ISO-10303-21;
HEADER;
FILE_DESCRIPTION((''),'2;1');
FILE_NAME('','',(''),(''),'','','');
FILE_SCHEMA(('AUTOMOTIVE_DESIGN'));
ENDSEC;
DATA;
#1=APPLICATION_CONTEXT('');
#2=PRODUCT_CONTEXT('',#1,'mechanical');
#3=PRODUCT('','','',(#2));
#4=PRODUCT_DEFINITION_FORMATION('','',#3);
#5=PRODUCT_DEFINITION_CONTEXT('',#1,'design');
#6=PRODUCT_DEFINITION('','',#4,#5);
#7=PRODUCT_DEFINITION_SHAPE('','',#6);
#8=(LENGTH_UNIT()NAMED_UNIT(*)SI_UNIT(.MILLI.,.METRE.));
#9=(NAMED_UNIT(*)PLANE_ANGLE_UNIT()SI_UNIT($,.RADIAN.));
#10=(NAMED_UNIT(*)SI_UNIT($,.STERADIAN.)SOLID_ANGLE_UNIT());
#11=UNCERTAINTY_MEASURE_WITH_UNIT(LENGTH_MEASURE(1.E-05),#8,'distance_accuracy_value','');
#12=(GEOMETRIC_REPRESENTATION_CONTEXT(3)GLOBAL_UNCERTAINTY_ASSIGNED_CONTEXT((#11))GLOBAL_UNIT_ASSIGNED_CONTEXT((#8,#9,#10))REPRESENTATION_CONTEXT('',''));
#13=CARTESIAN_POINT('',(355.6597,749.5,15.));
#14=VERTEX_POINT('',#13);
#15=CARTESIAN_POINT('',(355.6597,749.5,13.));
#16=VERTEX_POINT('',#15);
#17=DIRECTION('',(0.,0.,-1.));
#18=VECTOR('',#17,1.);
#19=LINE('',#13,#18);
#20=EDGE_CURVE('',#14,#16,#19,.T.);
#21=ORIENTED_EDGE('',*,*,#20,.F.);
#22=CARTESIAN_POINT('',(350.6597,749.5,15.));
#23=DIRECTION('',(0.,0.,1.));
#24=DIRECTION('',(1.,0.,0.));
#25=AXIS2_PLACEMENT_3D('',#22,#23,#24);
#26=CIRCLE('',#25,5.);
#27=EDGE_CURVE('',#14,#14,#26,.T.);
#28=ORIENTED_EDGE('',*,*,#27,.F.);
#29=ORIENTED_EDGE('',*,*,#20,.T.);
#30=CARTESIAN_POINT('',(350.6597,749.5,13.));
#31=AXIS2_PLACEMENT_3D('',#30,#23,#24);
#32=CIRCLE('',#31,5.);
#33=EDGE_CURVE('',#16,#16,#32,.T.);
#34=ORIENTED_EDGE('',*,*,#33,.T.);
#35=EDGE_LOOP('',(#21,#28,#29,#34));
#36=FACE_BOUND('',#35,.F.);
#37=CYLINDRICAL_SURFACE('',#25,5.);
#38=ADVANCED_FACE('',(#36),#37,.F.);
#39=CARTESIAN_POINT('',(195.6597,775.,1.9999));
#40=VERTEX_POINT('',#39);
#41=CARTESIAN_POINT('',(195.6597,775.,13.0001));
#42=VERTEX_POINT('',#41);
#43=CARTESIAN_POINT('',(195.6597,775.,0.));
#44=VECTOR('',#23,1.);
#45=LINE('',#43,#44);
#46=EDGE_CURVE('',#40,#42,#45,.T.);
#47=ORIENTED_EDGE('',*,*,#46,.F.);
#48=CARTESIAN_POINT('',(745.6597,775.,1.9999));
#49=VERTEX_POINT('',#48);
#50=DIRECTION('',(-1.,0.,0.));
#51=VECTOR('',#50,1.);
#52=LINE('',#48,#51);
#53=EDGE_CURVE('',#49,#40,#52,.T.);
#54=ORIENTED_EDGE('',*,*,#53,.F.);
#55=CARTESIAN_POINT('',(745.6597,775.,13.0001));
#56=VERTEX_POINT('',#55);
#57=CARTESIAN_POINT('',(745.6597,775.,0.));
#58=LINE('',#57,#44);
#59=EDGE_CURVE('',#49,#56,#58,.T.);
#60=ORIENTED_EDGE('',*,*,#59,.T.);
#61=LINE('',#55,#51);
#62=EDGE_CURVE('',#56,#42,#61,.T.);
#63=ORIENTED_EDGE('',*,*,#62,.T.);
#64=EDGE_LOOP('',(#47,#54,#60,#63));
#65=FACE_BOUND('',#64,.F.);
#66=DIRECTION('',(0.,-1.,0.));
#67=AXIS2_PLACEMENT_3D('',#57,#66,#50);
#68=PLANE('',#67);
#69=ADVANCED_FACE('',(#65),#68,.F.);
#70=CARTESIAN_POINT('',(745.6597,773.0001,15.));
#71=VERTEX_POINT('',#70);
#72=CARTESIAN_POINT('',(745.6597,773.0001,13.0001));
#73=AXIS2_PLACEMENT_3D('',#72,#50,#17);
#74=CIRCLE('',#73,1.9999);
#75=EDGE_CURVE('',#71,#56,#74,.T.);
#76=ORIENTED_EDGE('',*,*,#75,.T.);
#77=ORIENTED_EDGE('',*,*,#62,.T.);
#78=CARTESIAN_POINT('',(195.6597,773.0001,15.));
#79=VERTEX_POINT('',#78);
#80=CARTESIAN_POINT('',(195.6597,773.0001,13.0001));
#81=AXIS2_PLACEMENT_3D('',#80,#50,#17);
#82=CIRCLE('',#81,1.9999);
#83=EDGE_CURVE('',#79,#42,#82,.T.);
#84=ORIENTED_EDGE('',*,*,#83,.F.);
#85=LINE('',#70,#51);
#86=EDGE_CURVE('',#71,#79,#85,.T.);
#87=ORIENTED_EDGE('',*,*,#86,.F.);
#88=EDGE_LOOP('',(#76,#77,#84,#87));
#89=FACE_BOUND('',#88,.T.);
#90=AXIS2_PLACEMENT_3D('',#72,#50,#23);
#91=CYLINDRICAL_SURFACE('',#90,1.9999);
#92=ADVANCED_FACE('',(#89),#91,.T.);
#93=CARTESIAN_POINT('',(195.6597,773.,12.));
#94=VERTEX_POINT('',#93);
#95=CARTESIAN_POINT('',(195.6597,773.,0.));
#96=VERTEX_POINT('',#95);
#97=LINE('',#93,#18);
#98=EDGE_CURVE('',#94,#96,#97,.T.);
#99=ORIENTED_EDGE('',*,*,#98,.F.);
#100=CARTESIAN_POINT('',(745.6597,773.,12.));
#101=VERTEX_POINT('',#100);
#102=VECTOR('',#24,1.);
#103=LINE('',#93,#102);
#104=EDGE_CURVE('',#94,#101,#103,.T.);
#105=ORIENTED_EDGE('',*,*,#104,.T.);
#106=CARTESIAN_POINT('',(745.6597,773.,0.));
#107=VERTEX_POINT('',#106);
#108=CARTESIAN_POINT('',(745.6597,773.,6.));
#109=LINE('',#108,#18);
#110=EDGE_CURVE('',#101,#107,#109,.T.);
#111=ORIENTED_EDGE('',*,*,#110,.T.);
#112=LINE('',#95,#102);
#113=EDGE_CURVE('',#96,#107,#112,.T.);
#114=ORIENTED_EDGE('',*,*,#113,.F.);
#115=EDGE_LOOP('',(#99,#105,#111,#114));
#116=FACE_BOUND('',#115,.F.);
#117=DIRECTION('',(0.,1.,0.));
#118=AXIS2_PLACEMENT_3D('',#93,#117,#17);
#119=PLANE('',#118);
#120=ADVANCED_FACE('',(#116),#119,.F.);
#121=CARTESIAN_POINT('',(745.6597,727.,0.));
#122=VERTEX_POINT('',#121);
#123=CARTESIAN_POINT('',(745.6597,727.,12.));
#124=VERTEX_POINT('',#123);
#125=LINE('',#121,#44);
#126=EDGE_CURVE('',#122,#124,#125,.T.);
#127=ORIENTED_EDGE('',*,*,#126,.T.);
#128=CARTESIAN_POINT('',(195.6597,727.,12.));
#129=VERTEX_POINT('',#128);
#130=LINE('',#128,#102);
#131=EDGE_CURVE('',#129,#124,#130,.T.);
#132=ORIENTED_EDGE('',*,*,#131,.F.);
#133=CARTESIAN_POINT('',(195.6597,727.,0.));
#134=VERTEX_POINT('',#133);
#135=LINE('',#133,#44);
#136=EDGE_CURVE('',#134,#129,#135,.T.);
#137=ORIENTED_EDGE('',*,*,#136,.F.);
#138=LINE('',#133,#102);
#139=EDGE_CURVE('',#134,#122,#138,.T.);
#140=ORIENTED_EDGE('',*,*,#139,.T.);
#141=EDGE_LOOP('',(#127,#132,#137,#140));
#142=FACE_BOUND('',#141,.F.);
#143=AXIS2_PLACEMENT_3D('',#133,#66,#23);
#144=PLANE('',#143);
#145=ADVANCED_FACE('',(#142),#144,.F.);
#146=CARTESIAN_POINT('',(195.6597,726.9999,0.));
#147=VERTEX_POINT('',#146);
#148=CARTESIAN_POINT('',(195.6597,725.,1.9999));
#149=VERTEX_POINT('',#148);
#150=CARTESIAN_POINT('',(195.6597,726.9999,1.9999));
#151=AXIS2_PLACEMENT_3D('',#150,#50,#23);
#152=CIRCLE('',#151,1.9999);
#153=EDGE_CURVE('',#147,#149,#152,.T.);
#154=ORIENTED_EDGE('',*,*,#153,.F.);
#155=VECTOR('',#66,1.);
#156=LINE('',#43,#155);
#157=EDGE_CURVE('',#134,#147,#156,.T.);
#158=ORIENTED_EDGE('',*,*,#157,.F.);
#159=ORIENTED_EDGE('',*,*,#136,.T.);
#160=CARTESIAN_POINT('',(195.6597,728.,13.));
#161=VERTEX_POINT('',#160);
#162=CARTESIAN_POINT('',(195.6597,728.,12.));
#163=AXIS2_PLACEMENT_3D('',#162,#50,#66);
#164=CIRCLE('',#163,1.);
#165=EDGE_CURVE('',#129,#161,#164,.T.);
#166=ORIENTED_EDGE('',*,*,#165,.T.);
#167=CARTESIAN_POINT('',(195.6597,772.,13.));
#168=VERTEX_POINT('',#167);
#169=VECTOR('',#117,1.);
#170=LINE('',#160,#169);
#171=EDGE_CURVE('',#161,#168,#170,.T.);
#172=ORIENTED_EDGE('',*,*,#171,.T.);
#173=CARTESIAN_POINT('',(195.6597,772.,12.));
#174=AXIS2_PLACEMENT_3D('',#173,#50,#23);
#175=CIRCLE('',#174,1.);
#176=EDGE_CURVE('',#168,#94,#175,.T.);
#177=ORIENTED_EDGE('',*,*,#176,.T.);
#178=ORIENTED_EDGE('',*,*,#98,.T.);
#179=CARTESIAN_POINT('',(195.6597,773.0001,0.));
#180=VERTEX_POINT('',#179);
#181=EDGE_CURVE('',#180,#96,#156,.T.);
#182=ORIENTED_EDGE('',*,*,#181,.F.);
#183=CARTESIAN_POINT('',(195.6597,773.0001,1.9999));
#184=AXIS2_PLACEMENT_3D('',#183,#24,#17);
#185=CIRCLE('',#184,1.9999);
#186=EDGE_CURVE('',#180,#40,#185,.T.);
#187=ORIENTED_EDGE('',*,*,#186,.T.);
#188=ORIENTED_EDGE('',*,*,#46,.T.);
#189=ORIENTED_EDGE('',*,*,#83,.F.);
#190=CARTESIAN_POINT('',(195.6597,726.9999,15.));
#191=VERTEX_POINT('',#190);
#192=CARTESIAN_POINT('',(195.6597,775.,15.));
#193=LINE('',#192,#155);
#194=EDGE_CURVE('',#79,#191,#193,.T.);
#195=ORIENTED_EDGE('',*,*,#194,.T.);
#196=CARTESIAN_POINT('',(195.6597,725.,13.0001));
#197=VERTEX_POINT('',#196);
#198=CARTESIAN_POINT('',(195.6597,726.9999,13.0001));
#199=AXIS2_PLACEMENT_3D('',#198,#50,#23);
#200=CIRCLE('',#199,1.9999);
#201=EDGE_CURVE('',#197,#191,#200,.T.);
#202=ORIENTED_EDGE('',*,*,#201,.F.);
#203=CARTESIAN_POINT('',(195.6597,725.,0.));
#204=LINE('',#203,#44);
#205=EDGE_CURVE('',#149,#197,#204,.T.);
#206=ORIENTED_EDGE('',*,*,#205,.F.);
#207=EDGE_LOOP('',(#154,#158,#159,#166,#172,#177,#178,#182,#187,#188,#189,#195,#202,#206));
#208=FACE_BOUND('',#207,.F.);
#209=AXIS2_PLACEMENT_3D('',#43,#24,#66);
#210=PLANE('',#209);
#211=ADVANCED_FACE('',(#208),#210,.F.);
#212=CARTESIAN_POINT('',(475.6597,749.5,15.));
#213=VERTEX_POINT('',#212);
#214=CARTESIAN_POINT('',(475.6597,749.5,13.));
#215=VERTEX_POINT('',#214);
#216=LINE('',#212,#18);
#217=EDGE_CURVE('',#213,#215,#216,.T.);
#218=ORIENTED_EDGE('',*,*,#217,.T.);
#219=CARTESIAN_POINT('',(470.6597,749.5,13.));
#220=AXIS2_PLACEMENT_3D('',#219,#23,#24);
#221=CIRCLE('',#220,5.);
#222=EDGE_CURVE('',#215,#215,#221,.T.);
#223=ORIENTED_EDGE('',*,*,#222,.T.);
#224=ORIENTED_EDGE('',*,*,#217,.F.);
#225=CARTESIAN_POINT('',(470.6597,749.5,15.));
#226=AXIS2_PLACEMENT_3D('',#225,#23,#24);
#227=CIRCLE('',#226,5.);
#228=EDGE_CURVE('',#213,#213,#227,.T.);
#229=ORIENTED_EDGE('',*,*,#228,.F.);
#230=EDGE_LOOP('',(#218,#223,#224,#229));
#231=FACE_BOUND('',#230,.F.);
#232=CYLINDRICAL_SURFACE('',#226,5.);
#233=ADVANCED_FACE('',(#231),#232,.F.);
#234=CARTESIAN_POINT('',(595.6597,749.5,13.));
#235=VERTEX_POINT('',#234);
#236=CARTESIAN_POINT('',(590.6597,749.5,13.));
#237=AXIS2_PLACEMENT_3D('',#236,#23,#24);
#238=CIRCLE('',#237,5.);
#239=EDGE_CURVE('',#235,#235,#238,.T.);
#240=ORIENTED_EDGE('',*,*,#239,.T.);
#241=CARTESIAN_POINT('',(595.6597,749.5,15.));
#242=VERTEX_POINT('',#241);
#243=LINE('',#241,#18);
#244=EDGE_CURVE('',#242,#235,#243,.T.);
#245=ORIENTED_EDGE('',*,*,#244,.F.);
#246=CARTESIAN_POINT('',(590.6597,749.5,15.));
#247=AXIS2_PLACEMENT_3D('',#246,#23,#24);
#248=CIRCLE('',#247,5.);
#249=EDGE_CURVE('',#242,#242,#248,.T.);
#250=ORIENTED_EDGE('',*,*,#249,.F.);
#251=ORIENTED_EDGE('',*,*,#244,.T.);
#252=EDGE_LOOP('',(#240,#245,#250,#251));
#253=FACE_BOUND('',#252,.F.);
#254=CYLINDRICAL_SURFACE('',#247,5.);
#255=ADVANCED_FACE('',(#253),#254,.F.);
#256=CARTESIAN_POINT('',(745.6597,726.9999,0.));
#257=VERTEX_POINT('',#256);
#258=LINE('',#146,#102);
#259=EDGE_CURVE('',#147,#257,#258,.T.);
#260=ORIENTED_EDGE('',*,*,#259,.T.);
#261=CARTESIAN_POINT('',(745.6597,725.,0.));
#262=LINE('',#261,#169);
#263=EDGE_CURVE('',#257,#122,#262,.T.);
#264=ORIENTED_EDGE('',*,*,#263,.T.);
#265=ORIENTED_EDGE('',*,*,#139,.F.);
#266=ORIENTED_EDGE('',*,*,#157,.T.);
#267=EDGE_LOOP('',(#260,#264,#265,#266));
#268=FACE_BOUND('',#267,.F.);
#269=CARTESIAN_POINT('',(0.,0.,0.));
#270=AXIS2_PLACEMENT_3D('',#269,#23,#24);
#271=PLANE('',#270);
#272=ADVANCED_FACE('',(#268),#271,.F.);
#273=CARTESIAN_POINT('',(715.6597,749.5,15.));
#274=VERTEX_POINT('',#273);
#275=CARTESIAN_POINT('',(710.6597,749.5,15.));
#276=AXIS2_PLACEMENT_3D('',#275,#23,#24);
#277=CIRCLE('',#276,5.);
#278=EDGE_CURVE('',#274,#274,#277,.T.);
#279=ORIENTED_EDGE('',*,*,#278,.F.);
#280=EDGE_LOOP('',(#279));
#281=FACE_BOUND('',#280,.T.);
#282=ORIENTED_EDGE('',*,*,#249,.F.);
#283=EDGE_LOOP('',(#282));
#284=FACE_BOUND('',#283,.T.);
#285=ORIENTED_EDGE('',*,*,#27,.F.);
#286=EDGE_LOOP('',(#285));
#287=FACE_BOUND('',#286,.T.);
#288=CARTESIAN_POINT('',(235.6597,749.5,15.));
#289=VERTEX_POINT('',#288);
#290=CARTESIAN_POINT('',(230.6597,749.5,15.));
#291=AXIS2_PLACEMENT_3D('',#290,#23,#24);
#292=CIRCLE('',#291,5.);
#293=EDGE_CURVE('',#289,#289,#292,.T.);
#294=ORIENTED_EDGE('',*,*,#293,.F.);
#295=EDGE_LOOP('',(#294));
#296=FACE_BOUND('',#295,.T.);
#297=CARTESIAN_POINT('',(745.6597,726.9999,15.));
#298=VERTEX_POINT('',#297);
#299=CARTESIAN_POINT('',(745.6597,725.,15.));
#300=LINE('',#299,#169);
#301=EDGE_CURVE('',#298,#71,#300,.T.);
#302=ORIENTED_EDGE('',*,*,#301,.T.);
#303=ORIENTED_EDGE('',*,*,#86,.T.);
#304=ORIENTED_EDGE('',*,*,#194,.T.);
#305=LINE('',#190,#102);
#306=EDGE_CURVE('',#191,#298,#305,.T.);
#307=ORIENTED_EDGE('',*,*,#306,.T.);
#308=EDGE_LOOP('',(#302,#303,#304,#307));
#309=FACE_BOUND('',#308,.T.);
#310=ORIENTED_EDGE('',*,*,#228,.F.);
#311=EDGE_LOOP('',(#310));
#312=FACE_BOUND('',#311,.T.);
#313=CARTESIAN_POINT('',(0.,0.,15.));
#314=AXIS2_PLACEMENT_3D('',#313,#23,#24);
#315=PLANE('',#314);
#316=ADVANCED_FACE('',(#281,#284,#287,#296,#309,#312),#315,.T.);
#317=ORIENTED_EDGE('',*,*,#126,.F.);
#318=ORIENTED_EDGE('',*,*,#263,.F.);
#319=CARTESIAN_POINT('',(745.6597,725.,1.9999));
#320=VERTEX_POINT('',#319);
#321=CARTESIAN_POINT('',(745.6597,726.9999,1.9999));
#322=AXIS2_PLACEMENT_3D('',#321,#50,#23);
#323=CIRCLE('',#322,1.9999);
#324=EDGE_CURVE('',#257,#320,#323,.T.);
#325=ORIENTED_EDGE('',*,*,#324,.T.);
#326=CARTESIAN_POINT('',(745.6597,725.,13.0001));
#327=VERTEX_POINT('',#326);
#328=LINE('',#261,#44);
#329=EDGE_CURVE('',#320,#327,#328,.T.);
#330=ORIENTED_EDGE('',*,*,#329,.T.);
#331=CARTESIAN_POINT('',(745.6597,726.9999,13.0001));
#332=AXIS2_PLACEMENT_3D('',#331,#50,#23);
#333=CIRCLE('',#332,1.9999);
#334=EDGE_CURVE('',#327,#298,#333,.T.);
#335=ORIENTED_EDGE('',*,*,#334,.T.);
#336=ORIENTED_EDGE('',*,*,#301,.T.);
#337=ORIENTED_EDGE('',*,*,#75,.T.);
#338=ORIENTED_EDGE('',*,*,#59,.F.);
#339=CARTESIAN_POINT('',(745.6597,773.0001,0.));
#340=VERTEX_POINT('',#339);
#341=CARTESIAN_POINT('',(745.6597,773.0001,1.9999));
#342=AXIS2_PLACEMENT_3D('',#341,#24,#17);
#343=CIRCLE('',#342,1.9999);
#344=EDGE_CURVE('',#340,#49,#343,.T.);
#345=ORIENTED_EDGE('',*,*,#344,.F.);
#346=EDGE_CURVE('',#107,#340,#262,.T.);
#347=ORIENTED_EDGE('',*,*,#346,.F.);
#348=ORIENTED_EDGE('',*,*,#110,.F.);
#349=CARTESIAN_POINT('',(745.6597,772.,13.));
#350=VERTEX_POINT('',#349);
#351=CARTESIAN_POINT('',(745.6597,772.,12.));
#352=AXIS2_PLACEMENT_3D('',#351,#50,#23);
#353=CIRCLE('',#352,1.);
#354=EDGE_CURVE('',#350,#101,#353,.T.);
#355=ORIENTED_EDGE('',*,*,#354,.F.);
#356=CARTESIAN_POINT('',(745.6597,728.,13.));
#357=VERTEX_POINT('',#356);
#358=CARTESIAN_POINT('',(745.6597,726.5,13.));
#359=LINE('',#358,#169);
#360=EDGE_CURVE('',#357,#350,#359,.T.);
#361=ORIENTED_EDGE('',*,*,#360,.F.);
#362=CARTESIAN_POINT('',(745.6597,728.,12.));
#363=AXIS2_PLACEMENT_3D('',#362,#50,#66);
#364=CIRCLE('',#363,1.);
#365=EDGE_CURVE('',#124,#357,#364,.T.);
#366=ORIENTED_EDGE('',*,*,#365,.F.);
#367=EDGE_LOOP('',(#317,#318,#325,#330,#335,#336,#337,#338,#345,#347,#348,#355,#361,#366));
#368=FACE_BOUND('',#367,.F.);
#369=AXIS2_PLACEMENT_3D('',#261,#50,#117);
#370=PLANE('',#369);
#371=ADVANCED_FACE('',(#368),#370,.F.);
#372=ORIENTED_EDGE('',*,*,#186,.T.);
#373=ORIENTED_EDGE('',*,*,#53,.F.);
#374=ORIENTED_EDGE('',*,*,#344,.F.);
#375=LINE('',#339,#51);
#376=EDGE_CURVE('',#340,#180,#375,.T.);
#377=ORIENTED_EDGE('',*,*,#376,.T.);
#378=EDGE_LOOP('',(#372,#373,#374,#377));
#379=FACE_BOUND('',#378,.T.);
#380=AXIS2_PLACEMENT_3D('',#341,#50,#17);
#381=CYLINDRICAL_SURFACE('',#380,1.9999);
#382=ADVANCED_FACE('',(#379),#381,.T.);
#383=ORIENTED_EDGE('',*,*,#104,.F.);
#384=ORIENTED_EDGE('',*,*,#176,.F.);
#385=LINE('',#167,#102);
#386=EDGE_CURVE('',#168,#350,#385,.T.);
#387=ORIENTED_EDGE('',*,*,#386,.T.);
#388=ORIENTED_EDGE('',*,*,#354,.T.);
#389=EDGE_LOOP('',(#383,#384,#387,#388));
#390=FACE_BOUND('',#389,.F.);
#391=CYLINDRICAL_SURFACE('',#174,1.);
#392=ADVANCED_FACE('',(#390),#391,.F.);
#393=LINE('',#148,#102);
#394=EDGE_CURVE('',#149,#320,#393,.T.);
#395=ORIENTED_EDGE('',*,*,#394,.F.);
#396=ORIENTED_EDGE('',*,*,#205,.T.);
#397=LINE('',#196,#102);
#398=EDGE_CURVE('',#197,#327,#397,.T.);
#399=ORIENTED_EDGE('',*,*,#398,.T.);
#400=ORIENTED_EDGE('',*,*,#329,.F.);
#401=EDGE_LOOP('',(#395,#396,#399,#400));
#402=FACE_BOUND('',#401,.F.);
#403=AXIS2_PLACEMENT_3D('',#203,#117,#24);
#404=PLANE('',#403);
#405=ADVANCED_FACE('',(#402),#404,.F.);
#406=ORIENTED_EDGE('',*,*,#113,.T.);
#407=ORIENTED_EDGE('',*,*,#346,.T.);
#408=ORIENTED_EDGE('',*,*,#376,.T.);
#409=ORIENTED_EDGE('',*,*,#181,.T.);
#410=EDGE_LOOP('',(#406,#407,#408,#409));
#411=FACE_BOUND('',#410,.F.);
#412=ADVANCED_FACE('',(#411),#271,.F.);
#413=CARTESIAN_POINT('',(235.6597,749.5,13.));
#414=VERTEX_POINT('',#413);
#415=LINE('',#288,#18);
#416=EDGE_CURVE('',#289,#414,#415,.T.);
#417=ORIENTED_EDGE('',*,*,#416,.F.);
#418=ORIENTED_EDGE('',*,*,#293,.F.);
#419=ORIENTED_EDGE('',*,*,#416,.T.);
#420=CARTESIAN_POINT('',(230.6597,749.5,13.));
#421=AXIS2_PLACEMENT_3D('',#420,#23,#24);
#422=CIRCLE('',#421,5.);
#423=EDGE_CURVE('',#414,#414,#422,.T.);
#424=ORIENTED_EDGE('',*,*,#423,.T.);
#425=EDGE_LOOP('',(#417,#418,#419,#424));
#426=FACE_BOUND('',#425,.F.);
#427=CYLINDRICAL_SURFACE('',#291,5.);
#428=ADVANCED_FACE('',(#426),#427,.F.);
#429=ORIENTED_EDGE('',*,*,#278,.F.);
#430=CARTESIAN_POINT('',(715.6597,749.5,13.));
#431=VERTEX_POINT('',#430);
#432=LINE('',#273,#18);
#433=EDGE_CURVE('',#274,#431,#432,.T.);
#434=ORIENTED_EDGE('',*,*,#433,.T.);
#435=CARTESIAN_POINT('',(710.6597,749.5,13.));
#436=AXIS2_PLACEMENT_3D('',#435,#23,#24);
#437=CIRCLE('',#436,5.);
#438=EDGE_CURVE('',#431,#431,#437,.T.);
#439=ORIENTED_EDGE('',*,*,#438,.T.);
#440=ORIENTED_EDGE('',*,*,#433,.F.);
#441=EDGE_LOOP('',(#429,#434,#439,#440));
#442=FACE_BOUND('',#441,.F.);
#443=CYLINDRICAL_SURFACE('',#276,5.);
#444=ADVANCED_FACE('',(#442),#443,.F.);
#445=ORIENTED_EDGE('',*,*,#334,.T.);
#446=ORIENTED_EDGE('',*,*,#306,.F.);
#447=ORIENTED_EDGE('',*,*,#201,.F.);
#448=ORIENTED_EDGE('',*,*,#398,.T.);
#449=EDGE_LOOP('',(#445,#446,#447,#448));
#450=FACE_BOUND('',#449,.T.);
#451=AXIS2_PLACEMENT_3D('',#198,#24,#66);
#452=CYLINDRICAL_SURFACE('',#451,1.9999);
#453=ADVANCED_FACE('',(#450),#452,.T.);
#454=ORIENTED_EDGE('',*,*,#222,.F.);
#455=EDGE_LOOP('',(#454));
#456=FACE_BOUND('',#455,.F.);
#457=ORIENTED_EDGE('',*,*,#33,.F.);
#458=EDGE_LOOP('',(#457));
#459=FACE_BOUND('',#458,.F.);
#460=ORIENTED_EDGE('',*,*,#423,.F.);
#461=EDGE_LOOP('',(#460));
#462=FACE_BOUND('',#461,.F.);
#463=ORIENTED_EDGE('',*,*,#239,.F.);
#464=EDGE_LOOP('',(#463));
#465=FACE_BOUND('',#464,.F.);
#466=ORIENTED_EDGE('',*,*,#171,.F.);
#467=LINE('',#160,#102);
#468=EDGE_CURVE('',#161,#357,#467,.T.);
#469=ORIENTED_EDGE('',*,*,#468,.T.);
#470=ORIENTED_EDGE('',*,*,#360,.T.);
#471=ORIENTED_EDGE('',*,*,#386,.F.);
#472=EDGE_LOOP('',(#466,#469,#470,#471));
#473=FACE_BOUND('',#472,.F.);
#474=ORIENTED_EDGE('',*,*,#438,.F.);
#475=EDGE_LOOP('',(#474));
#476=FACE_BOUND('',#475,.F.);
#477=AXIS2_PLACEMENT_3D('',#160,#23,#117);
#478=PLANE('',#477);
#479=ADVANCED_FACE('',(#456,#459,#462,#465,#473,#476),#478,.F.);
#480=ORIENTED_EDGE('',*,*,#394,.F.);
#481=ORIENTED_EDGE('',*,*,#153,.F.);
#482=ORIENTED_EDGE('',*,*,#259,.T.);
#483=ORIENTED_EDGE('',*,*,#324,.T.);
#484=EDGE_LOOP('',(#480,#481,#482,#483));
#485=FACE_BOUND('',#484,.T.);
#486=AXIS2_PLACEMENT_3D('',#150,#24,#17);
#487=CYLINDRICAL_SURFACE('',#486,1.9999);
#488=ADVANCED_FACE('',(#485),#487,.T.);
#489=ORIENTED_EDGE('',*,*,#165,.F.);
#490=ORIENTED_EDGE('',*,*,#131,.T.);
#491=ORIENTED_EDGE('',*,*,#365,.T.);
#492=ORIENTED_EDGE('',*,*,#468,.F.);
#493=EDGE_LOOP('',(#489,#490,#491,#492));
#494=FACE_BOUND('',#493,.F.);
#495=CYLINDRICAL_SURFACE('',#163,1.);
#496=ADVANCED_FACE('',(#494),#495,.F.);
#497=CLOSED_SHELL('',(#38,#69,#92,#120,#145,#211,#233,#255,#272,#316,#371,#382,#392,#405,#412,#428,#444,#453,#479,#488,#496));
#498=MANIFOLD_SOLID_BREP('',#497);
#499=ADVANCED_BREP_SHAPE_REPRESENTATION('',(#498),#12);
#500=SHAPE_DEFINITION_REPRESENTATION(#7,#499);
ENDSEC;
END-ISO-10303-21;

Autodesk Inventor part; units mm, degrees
ref_plane "YZ Plane" through (0, 0, 0) normal (1, 0, 0) x (0, 1, 0)
ref_plane "XZ Plane" through (0, 0, 0) normal (0, 1, 0) x (-1, 0, 0)
ref_plane "Work Plane1" through (0, 0, 0) normal (0, 0, 1) x (1, 0, 0)
sketch "Sketch1" plane through (0, 0, 0) normal (0, 0, 1) x (1, 0, 0)
  line L0 (195.6597, 725) -> (745.6597, 725)
  line L1 (745.6597, 725) -> (745.6597, 775)
  line L2 (745.6597, 775) -> (195.6597, 775)
  line L3 (195.6597, 775) -> (195.6597, 725)
  line L4 (164.0316, 10) -> (164.0316, 1490) projected
  line L5 (777.2877, 10) -> (164.0316, 10) projected
  line L6 (470.6597, 10) -> (470.6597, 1506) construction
  line L7 (164.0316, 750) -> (680, 750) construction
  point P0 (0, 0)
  point P1 (470.6597, 725)
  point P2 (195.6597, 750)
  dimension "d0" = 550
  dimension "d1" = 50
extrude "Extrusion1" add sketch "Sketch1" along normal blind 15
sketch "Sketch2" plane through (195.6597, 725, 0) normal (-1, 0, 0) x (0, 0, 1)
  line L0 (15, 0) -> (0, 0) projected
  line L1 (0, 0) -> (0, 50) projected
  line L2 (0, 50) -> (15, 50) projected
  line L3 (15, 50) -> (15, 0) projected
  line L4 (12, 48) -> (0, 48)
  line L5 (0, 2) -> (12, 2)
  line L6 (13, 3) -> (13, 47)
  arc A0 (13, 47) -> (12, 48) centre (12, 47) ccw
  arc A1 (12, 2) -> (13, 3) centre (12, 3) ccw
  point P0 (0, -725)
  dimension "d5" = 2
extrude "Extrusion2" cut sketch "Sketch2" against normal through all contours L1 L4 A0 L6 A1 L5
fillet "Fillet1" radius 2 4 edges at (470.6597, 775, 15) (470.6597, 775, 0) (470.6597, 725, 0) (470.6597, 725, 15)
sketch "Sketch3" plane through (0, 0, 15) normal (0, 0, 1) x (1, 0, 0)
  line L0 (195.6597, 727) -> (745.6597, 727) construction
  line L1 (745.6597, 773) -> (745.6597, 727) construction
  line L2 (745.6597, 773) -> (195.6597, 773) construction
  line L3 (195.6597, 727) -> (195.6597, 773) construction
  line L4 (195.6597, 772) -> (745.6597, 772) projected
  line L5 (470.6597, 772) -> (470.6597, 727) construction
  circle A0 centre (470.6597, 749.5) radius 5
  point P0 (0, 0)
  dimension "d10" = 10
extrude "Extrusion3" cut sketch "Sketch3" against normal up to next
pattern_linear "Rectangular Pattern1" count 5 spacing 120 along (1, 0, 0) of "Extrusion3" first direction both ways yes
properties part number "support1" material "Stainless Steel"
